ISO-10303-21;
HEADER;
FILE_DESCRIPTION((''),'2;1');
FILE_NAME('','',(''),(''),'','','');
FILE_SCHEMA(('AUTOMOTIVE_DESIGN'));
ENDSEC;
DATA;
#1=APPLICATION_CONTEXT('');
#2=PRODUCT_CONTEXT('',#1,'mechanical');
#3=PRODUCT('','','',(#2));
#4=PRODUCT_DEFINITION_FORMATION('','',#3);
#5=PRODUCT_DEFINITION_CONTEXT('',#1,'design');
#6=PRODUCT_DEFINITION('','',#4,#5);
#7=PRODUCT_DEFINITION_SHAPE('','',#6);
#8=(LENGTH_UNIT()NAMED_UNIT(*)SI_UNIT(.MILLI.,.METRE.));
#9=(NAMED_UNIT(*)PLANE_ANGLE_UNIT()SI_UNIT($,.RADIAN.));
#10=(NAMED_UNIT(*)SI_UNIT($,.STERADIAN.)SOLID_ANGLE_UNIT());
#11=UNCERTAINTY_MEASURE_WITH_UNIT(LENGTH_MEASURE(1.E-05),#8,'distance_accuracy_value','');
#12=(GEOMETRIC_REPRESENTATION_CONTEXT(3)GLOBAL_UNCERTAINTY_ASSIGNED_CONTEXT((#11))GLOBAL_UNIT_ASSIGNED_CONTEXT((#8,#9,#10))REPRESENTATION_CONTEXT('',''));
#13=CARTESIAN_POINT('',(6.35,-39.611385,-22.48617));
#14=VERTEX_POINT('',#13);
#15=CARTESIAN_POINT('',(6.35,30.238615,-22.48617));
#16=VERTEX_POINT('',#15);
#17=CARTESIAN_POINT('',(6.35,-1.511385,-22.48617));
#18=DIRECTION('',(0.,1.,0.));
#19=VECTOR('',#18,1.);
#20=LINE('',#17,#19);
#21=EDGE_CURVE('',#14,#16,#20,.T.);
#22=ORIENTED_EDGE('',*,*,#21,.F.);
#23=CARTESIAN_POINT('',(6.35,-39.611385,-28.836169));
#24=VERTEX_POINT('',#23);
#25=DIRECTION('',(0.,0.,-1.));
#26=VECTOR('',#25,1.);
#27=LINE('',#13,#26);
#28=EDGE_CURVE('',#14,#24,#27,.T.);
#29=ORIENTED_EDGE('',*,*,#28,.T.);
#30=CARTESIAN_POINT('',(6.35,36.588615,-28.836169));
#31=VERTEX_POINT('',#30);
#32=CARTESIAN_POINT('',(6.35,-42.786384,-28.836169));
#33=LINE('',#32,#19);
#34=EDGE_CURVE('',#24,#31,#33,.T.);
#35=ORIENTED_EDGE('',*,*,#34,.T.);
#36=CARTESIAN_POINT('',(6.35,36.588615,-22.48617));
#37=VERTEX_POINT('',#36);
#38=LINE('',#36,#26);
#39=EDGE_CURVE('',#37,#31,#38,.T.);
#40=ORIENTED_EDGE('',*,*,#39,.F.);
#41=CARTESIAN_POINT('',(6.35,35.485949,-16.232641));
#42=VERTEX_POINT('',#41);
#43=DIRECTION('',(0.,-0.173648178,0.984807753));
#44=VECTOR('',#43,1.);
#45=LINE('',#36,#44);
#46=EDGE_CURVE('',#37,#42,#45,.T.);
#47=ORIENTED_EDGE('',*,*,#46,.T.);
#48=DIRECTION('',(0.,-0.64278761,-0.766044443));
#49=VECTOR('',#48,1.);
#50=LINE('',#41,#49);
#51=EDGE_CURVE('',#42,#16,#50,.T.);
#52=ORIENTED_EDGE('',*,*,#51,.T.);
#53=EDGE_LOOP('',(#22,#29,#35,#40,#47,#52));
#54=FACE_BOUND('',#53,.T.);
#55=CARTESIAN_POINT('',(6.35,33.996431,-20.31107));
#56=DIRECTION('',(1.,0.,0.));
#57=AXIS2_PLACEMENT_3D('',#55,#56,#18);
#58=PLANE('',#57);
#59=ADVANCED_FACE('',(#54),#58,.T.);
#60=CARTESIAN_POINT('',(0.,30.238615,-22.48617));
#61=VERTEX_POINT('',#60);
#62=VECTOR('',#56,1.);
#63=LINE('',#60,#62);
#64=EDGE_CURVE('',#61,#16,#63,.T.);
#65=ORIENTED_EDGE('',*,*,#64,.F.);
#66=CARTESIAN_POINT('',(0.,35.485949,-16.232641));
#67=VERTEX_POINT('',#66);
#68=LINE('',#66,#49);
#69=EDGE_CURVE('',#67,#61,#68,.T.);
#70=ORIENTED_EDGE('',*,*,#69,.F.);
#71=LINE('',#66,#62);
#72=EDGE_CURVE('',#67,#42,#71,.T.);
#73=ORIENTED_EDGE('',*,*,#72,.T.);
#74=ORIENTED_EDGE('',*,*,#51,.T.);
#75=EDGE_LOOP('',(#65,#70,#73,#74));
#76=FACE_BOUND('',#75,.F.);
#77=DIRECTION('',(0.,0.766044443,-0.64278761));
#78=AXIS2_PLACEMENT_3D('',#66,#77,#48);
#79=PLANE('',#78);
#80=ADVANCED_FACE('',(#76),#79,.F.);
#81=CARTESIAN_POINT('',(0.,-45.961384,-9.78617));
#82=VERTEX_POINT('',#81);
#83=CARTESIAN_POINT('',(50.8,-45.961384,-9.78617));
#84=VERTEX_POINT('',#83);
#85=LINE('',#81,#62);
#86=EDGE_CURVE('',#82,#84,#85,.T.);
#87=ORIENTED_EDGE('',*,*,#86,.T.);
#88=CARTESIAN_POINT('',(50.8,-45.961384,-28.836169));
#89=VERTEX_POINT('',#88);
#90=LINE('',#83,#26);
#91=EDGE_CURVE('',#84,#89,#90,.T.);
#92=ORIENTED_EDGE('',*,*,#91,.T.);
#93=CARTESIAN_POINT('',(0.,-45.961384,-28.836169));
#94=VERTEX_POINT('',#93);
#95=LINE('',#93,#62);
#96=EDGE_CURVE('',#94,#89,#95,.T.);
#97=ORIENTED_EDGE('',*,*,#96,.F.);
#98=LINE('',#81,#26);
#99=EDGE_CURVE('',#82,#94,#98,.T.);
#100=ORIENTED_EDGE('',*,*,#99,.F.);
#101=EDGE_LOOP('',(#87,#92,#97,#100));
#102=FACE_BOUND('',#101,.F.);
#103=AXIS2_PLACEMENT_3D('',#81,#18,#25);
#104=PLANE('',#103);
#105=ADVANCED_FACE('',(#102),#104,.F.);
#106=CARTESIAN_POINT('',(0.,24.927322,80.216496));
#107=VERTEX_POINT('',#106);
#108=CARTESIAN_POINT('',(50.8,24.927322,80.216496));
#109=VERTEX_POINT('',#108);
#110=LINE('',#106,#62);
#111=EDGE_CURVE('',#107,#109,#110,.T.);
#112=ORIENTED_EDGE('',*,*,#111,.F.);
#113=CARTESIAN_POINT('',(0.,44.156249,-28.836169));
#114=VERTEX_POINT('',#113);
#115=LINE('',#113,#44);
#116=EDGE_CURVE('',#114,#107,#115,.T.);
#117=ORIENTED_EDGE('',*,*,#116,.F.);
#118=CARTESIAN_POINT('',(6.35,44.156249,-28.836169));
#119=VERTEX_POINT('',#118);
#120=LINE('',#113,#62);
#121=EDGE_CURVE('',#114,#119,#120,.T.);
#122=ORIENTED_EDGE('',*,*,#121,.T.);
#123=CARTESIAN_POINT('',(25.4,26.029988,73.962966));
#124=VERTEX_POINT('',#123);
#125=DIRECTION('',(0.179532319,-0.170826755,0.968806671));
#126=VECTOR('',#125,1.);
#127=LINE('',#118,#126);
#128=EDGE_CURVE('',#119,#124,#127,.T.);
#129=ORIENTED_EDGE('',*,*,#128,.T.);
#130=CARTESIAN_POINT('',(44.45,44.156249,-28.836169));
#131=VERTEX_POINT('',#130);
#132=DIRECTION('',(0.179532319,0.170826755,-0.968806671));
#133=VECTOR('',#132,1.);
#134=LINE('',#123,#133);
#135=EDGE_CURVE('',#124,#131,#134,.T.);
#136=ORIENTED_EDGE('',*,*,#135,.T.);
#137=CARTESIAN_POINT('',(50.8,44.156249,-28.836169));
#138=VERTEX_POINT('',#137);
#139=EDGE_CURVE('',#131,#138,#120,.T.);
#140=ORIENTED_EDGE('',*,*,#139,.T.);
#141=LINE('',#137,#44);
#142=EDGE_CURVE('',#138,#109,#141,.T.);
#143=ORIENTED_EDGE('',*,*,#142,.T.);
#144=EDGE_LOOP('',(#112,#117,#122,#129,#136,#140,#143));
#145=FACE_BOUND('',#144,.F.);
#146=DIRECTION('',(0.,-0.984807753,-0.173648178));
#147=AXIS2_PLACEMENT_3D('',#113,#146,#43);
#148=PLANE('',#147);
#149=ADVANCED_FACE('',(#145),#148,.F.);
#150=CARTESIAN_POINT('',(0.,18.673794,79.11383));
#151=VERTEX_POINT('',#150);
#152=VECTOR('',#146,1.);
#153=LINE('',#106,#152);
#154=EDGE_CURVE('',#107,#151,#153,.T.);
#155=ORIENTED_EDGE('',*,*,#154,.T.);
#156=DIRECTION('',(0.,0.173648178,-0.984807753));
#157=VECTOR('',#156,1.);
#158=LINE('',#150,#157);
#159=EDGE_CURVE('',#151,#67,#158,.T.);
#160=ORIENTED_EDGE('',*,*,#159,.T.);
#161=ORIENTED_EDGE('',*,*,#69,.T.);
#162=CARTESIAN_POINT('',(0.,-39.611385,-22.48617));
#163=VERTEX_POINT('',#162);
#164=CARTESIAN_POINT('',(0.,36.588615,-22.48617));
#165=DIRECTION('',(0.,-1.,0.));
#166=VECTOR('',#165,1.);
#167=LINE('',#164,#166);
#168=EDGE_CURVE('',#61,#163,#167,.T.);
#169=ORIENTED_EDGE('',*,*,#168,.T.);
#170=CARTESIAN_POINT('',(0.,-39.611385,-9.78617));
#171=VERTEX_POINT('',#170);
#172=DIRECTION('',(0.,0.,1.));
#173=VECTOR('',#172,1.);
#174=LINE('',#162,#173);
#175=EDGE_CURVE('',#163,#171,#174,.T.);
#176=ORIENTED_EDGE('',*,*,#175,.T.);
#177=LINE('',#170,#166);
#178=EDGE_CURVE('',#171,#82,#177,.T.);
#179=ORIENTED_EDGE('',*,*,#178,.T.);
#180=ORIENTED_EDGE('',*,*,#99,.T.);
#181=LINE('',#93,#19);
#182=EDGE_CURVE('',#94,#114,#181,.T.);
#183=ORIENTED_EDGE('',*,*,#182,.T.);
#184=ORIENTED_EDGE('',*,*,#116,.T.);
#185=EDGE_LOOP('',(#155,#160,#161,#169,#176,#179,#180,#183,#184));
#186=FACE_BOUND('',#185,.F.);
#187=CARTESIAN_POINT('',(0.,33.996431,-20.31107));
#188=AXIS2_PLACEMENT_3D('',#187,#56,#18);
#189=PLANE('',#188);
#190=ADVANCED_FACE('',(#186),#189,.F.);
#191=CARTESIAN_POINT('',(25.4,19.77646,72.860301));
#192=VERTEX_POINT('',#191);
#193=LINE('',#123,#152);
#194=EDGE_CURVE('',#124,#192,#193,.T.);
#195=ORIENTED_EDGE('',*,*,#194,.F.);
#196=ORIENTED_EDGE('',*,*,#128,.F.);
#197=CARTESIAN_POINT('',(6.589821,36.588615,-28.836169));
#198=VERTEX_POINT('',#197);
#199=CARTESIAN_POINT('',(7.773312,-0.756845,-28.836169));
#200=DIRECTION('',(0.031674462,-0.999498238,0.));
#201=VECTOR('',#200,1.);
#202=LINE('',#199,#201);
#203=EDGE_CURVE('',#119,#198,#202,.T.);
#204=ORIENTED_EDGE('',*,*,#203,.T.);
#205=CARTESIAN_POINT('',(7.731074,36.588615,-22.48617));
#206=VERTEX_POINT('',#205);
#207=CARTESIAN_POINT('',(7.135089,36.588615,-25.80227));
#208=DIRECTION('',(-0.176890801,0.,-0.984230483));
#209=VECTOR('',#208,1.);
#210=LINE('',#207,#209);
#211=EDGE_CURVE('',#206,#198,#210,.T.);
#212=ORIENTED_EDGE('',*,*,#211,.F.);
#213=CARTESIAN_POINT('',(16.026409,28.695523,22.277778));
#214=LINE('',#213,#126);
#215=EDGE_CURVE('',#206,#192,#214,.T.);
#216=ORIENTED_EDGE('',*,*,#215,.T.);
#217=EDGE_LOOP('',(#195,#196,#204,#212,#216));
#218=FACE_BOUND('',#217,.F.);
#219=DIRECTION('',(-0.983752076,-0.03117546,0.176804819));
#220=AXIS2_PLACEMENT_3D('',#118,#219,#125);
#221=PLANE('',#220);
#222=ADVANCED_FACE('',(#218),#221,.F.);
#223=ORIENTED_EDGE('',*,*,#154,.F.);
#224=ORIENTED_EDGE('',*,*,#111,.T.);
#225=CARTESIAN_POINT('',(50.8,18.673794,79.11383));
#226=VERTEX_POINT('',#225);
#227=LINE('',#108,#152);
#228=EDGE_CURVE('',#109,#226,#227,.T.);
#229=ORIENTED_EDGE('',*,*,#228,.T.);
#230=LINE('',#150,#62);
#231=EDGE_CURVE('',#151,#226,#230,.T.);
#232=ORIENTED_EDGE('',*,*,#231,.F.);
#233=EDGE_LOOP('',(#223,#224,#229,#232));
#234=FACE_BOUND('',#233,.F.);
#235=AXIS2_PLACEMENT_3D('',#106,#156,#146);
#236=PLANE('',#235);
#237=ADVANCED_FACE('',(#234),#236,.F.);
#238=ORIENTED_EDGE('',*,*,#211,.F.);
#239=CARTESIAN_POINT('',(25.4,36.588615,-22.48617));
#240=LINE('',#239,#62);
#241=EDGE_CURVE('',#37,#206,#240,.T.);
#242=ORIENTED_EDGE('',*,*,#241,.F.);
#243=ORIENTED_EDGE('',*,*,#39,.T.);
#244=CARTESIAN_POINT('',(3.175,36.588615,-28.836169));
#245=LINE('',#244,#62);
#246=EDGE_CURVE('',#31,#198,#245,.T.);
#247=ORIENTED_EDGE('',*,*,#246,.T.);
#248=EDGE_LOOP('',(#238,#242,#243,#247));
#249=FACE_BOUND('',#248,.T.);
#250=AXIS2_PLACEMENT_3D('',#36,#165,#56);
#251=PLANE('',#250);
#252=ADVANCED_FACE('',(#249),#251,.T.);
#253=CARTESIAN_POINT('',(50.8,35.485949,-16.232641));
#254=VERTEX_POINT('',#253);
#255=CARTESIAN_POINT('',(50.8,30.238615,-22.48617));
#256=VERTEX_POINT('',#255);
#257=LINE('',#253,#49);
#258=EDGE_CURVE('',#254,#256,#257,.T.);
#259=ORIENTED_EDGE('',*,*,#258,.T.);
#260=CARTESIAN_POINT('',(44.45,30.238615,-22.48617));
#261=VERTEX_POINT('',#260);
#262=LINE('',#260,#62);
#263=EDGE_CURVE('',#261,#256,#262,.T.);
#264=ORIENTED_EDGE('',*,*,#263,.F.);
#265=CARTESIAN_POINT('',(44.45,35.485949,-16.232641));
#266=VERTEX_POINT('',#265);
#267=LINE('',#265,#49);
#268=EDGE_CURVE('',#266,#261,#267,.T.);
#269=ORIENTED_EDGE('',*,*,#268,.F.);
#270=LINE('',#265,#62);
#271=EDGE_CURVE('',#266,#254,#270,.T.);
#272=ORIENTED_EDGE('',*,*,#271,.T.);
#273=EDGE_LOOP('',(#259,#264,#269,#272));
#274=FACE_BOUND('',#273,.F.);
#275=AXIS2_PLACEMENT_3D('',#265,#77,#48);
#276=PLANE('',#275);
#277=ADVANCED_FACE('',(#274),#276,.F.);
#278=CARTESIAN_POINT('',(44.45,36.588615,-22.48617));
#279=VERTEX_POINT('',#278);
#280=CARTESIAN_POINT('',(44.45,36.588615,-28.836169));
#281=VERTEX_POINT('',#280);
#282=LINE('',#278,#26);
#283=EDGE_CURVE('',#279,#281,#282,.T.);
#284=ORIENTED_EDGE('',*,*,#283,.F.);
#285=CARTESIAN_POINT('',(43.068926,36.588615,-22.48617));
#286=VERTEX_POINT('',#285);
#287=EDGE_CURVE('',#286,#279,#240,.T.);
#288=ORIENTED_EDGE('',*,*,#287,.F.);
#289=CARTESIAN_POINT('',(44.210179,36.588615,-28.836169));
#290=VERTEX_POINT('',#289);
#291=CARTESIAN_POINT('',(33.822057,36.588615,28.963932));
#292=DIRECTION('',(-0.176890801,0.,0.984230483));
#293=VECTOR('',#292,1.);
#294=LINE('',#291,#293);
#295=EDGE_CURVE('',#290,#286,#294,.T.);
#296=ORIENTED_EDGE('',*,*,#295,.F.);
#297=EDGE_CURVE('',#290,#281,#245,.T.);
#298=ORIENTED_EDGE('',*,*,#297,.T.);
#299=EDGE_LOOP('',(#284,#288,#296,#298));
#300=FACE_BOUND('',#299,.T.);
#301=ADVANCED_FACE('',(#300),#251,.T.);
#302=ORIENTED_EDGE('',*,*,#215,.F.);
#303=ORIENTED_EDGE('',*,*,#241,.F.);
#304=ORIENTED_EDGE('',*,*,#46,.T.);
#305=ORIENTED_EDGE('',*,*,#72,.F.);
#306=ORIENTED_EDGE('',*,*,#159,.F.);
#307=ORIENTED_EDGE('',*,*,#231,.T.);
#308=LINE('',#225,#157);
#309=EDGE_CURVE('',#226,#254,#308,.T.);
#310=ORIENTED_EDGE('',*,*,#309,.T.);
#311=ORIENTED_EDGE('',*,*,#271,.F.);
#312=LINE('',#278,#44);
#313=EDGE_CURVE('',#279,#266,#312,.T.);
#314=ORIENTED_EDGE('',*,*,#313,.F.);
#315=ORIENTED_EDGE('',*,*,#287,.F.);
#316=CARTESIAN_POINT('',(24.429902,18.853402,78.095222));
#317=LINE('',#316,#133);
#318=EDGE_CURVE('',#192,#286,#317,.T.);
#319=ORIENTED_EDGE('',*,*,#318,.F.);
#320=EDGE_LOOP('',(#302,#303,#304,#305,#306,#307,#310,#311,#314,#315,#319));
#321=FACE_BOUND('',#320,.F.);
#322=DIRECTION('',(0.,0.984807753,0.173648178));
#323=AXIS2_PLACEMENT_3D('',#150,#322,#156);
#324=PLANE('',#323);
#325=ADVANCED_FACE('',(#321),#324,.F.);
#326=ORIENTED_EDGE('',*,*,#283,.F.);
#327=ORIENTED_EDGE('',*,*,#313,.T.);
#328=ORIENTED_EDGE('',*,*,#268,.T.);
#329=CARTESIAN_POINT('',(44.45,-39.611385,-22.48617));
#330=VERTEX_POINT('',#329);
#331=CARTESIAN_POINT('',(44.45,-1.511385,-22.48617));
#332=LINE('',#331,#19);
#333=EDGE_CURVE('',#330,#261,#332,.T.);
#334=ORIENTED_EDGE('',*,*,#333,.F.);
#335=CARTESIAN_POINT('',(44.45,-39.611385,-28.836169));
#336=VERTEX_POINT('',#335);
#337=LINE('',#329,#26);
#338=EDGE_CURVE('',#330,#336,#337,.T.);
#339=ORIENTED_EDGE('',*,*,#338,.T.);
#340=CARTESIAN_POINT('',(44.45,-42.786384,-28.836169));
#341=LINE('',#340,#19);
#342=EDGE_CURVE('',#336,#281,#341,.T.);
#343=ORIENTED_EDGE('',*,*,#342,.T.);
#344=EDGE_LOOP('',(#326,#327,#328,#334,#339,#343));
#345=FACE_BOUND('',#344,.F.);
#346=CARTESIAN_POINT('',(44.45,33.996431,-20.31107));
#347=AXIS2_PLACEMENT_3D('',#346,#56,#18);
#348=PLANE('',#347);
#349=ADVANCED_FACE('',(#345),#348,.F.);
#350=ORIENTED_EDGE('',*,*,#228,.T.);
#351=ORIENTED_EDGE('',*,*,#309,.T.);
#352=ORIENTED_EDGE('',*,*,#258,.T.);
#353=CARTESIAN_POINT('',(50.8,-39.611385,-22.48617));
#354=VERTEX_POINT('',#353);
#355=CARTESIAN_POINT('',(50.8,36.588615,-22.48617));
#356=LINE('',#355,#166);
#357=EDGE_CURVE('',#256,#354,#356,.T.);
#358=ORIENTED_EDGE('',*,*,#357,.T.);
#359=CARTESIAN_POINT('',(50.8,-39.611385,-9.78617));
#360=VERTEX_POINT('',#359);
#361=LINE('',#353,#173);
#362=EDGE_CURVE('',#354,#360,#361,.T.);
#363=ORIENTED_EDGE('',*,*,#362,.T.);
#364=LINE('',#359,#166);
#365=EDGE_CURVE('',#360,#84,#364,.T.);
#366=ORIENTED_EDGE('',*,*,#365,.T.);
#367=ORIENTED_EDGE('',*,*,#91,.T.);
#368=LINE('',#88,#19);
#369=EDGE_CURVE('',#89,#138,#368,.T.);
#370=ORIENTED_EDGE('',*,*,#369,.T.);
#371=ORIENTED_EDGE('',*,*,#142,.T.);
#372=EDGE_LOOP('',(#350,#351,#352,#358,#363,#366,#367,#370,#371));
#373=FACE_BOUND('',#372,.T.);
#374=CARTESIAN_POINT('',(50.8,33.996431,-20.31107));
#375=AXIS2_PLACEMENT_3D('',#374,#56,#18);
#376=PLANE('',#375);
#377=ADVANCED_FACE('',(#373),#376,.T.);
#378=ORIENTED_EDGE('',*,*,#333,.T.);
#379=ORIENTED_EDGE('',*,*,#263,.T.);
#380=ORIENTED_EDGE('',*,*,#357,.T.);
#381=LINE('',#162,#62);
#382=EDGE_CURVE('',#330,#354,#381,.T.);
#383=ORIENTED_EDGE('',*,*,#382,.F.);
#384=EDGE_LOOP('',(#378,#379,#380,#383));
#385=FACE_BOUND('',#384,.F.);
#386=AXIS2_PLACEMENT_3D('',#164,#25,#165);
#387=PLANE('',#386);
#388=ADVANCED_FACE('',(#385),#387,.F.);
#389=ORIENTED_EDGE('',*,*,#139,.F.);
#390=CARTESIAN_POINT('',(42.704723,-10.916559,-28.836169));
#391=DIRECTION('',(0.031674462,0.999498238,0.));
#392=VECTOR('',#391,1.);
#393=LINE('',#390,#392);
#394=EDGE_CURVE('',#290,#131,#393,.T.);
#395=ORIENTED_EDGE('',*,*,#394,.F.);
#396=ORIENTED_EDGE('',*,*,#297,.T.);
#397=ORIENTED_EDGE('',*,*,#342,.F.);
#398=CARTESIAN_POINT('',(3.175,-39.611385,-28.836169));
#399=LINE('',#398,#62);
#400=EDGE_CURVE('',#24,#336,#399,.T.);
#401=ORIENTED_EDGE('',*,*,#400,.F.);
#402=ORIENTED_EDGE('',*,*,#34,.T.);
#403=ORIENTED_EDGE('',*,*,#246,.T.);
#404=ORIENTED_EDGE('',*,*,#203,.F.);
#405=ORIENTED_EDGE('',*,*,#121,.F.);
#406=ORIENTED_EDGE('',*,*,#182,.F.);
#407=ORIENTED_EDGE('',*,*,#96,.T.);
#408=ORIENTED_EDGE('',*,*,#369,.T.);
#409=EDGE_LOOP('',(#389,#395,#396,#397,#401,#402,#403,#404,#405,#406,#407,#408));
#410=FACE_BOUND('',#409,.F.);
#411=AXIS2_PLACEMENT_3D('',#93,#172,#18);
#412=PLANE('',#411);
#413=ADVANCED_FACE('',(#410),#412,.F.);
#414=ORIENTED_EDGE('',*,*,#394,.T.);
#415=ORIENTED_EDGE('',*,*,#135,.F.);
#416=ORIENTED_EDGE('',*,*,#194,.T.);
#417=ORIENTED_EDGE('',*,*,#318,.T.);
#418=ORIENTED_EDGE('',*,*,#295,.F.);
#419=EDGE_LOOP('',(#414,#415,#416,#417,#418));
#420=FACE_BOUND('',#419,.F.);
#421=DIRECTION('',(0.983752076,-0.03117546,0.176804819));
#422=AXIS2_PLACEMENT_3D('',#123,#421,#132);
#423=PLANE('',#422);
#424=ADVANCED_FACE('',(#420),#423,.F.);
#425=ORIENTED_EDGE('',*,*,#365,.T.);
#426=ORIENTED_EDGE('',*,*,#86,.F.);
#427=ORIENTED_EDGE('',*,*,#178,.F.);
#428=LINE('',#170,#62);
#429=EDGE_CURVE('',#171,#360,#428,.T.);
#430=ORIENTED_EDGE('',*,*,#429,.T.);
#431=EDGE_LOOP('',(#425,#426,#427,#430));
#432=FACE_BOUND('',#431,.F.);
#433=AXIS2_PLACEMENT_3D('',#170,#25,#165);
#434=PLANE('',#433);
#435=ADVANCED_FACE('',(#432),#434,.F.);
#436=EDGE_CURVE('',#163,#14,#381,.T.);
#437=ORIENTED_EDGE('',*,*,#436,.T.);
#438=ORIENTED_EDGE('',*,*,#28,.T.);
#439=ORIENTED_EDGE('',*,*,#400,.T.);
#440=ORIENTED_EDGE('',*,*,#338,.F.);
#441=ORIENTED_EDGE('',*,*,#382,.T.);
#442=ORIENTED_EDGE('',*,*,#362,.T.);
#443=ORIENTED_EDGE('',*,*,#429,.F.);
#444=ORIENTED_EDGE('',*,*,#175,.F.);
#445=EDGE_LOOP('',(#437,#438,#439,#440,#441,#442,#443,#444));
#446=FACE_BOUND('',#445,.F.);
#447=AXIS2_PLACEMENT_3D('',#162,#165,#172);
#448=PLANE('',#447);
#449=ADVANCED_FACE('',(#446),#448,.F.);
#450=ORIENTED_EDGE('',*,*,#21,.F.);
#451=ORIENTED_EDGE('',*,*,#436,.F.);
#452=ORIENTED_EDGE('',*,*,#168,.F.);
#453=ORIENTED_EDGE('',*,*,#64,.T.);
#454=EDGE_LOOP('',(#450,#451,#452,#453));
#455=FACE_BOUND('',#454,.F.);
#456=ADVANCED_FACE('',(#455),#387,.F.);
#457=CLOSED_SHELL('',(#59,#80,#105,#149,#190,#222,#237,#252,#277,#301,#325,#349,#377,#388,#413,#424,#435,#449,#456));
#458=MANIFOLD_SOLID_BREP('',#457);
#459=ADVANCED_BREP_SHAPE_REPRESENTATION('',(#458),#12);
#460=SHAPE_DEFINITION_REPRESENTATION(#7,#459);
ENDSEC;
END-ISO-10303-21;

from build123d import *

# Parameters (mm, degrees)
F1_DEPTH    = 50.8
F2_W        = 38.1
F2_H        = 76.2
F3_DEPTH    = 25.4
F5_DEPTH    = 25.4
F6_T1_DEPTH = 6.35
F6_T3_DEPTH = 6.35


# Not quite as in the source:
# - a fillet or chamfer that OpenCascade refuses, or shapes differently, is made with other operations: its cross-section is extruded or revolved along the edge and cut away or added


with BuildPart() as f1:
    # F0 (on Right) → F1 (new body)
    with BuildSketch(Plane.YZ):
        Polygon((36.5886149989, -22.4861702016), (-39.6113850011, -22.4861702016), (-39.6113850011, -9.7861702016), (-45.9613837302, -9.7861702016), (-45.9613837302, -28.8361689307), (44.1562487973, -28.8361689307), (24.927321739, 80.2164955059), (18.673793759, 79.1138297984), align=None)
    extrude(amount=F1_DEPTH)

    # F2 (on face) → F3 (cut)
    with BuildSketch(Plane.XY.offset(-22.4861702016)):
        with Locations((25.4, -1.5113850011)):
            Rectangle(F2_W, F2_H)
    extrude(amount=-F3_DEPTH, mode=Mode.SUBTRACT)

    # F4 (on face) → F5 (cut)
    with BuildSketch(Plane(origin=(0, 37.8934996616, 6.6816463838), x_dir=(-1, 0, 0), z_dir=(0, 0.984807753, 0.1736481777))):
        Polygon((-25.4, 68.3192426996), (-44.45, -36.0657348664), (-6.35, -36.0657348664), align=None)
    extrude(amount=-F5_DEPTH, mode=Mode.SUBTRACT)

    # F6: chamfer of 6.35 on 4 edges, made by hand

    # F6_s2 → F6_t1 (join)
    with BuildSketch(Plane.YZ):
        Polygon((35.4859490708, -16.23264097), (30.2386149989, -22.4861702016), (36.5886149989, -22.4861702016), align=None)
    extrude(amount=F6_T1_DEPTH)

    # F6_s4 → F6_t3 (join)
    with BuildSketch(Plane.YZ.offset(44.45)):
        Polygon((35.4859490708, -16.23264097), (30.2386149989, -22.4861702016), (36.5886149989, -22.4861702016), align=None)
    extrude(amount=F6_T3_DEPTH)


solid = f1.part
